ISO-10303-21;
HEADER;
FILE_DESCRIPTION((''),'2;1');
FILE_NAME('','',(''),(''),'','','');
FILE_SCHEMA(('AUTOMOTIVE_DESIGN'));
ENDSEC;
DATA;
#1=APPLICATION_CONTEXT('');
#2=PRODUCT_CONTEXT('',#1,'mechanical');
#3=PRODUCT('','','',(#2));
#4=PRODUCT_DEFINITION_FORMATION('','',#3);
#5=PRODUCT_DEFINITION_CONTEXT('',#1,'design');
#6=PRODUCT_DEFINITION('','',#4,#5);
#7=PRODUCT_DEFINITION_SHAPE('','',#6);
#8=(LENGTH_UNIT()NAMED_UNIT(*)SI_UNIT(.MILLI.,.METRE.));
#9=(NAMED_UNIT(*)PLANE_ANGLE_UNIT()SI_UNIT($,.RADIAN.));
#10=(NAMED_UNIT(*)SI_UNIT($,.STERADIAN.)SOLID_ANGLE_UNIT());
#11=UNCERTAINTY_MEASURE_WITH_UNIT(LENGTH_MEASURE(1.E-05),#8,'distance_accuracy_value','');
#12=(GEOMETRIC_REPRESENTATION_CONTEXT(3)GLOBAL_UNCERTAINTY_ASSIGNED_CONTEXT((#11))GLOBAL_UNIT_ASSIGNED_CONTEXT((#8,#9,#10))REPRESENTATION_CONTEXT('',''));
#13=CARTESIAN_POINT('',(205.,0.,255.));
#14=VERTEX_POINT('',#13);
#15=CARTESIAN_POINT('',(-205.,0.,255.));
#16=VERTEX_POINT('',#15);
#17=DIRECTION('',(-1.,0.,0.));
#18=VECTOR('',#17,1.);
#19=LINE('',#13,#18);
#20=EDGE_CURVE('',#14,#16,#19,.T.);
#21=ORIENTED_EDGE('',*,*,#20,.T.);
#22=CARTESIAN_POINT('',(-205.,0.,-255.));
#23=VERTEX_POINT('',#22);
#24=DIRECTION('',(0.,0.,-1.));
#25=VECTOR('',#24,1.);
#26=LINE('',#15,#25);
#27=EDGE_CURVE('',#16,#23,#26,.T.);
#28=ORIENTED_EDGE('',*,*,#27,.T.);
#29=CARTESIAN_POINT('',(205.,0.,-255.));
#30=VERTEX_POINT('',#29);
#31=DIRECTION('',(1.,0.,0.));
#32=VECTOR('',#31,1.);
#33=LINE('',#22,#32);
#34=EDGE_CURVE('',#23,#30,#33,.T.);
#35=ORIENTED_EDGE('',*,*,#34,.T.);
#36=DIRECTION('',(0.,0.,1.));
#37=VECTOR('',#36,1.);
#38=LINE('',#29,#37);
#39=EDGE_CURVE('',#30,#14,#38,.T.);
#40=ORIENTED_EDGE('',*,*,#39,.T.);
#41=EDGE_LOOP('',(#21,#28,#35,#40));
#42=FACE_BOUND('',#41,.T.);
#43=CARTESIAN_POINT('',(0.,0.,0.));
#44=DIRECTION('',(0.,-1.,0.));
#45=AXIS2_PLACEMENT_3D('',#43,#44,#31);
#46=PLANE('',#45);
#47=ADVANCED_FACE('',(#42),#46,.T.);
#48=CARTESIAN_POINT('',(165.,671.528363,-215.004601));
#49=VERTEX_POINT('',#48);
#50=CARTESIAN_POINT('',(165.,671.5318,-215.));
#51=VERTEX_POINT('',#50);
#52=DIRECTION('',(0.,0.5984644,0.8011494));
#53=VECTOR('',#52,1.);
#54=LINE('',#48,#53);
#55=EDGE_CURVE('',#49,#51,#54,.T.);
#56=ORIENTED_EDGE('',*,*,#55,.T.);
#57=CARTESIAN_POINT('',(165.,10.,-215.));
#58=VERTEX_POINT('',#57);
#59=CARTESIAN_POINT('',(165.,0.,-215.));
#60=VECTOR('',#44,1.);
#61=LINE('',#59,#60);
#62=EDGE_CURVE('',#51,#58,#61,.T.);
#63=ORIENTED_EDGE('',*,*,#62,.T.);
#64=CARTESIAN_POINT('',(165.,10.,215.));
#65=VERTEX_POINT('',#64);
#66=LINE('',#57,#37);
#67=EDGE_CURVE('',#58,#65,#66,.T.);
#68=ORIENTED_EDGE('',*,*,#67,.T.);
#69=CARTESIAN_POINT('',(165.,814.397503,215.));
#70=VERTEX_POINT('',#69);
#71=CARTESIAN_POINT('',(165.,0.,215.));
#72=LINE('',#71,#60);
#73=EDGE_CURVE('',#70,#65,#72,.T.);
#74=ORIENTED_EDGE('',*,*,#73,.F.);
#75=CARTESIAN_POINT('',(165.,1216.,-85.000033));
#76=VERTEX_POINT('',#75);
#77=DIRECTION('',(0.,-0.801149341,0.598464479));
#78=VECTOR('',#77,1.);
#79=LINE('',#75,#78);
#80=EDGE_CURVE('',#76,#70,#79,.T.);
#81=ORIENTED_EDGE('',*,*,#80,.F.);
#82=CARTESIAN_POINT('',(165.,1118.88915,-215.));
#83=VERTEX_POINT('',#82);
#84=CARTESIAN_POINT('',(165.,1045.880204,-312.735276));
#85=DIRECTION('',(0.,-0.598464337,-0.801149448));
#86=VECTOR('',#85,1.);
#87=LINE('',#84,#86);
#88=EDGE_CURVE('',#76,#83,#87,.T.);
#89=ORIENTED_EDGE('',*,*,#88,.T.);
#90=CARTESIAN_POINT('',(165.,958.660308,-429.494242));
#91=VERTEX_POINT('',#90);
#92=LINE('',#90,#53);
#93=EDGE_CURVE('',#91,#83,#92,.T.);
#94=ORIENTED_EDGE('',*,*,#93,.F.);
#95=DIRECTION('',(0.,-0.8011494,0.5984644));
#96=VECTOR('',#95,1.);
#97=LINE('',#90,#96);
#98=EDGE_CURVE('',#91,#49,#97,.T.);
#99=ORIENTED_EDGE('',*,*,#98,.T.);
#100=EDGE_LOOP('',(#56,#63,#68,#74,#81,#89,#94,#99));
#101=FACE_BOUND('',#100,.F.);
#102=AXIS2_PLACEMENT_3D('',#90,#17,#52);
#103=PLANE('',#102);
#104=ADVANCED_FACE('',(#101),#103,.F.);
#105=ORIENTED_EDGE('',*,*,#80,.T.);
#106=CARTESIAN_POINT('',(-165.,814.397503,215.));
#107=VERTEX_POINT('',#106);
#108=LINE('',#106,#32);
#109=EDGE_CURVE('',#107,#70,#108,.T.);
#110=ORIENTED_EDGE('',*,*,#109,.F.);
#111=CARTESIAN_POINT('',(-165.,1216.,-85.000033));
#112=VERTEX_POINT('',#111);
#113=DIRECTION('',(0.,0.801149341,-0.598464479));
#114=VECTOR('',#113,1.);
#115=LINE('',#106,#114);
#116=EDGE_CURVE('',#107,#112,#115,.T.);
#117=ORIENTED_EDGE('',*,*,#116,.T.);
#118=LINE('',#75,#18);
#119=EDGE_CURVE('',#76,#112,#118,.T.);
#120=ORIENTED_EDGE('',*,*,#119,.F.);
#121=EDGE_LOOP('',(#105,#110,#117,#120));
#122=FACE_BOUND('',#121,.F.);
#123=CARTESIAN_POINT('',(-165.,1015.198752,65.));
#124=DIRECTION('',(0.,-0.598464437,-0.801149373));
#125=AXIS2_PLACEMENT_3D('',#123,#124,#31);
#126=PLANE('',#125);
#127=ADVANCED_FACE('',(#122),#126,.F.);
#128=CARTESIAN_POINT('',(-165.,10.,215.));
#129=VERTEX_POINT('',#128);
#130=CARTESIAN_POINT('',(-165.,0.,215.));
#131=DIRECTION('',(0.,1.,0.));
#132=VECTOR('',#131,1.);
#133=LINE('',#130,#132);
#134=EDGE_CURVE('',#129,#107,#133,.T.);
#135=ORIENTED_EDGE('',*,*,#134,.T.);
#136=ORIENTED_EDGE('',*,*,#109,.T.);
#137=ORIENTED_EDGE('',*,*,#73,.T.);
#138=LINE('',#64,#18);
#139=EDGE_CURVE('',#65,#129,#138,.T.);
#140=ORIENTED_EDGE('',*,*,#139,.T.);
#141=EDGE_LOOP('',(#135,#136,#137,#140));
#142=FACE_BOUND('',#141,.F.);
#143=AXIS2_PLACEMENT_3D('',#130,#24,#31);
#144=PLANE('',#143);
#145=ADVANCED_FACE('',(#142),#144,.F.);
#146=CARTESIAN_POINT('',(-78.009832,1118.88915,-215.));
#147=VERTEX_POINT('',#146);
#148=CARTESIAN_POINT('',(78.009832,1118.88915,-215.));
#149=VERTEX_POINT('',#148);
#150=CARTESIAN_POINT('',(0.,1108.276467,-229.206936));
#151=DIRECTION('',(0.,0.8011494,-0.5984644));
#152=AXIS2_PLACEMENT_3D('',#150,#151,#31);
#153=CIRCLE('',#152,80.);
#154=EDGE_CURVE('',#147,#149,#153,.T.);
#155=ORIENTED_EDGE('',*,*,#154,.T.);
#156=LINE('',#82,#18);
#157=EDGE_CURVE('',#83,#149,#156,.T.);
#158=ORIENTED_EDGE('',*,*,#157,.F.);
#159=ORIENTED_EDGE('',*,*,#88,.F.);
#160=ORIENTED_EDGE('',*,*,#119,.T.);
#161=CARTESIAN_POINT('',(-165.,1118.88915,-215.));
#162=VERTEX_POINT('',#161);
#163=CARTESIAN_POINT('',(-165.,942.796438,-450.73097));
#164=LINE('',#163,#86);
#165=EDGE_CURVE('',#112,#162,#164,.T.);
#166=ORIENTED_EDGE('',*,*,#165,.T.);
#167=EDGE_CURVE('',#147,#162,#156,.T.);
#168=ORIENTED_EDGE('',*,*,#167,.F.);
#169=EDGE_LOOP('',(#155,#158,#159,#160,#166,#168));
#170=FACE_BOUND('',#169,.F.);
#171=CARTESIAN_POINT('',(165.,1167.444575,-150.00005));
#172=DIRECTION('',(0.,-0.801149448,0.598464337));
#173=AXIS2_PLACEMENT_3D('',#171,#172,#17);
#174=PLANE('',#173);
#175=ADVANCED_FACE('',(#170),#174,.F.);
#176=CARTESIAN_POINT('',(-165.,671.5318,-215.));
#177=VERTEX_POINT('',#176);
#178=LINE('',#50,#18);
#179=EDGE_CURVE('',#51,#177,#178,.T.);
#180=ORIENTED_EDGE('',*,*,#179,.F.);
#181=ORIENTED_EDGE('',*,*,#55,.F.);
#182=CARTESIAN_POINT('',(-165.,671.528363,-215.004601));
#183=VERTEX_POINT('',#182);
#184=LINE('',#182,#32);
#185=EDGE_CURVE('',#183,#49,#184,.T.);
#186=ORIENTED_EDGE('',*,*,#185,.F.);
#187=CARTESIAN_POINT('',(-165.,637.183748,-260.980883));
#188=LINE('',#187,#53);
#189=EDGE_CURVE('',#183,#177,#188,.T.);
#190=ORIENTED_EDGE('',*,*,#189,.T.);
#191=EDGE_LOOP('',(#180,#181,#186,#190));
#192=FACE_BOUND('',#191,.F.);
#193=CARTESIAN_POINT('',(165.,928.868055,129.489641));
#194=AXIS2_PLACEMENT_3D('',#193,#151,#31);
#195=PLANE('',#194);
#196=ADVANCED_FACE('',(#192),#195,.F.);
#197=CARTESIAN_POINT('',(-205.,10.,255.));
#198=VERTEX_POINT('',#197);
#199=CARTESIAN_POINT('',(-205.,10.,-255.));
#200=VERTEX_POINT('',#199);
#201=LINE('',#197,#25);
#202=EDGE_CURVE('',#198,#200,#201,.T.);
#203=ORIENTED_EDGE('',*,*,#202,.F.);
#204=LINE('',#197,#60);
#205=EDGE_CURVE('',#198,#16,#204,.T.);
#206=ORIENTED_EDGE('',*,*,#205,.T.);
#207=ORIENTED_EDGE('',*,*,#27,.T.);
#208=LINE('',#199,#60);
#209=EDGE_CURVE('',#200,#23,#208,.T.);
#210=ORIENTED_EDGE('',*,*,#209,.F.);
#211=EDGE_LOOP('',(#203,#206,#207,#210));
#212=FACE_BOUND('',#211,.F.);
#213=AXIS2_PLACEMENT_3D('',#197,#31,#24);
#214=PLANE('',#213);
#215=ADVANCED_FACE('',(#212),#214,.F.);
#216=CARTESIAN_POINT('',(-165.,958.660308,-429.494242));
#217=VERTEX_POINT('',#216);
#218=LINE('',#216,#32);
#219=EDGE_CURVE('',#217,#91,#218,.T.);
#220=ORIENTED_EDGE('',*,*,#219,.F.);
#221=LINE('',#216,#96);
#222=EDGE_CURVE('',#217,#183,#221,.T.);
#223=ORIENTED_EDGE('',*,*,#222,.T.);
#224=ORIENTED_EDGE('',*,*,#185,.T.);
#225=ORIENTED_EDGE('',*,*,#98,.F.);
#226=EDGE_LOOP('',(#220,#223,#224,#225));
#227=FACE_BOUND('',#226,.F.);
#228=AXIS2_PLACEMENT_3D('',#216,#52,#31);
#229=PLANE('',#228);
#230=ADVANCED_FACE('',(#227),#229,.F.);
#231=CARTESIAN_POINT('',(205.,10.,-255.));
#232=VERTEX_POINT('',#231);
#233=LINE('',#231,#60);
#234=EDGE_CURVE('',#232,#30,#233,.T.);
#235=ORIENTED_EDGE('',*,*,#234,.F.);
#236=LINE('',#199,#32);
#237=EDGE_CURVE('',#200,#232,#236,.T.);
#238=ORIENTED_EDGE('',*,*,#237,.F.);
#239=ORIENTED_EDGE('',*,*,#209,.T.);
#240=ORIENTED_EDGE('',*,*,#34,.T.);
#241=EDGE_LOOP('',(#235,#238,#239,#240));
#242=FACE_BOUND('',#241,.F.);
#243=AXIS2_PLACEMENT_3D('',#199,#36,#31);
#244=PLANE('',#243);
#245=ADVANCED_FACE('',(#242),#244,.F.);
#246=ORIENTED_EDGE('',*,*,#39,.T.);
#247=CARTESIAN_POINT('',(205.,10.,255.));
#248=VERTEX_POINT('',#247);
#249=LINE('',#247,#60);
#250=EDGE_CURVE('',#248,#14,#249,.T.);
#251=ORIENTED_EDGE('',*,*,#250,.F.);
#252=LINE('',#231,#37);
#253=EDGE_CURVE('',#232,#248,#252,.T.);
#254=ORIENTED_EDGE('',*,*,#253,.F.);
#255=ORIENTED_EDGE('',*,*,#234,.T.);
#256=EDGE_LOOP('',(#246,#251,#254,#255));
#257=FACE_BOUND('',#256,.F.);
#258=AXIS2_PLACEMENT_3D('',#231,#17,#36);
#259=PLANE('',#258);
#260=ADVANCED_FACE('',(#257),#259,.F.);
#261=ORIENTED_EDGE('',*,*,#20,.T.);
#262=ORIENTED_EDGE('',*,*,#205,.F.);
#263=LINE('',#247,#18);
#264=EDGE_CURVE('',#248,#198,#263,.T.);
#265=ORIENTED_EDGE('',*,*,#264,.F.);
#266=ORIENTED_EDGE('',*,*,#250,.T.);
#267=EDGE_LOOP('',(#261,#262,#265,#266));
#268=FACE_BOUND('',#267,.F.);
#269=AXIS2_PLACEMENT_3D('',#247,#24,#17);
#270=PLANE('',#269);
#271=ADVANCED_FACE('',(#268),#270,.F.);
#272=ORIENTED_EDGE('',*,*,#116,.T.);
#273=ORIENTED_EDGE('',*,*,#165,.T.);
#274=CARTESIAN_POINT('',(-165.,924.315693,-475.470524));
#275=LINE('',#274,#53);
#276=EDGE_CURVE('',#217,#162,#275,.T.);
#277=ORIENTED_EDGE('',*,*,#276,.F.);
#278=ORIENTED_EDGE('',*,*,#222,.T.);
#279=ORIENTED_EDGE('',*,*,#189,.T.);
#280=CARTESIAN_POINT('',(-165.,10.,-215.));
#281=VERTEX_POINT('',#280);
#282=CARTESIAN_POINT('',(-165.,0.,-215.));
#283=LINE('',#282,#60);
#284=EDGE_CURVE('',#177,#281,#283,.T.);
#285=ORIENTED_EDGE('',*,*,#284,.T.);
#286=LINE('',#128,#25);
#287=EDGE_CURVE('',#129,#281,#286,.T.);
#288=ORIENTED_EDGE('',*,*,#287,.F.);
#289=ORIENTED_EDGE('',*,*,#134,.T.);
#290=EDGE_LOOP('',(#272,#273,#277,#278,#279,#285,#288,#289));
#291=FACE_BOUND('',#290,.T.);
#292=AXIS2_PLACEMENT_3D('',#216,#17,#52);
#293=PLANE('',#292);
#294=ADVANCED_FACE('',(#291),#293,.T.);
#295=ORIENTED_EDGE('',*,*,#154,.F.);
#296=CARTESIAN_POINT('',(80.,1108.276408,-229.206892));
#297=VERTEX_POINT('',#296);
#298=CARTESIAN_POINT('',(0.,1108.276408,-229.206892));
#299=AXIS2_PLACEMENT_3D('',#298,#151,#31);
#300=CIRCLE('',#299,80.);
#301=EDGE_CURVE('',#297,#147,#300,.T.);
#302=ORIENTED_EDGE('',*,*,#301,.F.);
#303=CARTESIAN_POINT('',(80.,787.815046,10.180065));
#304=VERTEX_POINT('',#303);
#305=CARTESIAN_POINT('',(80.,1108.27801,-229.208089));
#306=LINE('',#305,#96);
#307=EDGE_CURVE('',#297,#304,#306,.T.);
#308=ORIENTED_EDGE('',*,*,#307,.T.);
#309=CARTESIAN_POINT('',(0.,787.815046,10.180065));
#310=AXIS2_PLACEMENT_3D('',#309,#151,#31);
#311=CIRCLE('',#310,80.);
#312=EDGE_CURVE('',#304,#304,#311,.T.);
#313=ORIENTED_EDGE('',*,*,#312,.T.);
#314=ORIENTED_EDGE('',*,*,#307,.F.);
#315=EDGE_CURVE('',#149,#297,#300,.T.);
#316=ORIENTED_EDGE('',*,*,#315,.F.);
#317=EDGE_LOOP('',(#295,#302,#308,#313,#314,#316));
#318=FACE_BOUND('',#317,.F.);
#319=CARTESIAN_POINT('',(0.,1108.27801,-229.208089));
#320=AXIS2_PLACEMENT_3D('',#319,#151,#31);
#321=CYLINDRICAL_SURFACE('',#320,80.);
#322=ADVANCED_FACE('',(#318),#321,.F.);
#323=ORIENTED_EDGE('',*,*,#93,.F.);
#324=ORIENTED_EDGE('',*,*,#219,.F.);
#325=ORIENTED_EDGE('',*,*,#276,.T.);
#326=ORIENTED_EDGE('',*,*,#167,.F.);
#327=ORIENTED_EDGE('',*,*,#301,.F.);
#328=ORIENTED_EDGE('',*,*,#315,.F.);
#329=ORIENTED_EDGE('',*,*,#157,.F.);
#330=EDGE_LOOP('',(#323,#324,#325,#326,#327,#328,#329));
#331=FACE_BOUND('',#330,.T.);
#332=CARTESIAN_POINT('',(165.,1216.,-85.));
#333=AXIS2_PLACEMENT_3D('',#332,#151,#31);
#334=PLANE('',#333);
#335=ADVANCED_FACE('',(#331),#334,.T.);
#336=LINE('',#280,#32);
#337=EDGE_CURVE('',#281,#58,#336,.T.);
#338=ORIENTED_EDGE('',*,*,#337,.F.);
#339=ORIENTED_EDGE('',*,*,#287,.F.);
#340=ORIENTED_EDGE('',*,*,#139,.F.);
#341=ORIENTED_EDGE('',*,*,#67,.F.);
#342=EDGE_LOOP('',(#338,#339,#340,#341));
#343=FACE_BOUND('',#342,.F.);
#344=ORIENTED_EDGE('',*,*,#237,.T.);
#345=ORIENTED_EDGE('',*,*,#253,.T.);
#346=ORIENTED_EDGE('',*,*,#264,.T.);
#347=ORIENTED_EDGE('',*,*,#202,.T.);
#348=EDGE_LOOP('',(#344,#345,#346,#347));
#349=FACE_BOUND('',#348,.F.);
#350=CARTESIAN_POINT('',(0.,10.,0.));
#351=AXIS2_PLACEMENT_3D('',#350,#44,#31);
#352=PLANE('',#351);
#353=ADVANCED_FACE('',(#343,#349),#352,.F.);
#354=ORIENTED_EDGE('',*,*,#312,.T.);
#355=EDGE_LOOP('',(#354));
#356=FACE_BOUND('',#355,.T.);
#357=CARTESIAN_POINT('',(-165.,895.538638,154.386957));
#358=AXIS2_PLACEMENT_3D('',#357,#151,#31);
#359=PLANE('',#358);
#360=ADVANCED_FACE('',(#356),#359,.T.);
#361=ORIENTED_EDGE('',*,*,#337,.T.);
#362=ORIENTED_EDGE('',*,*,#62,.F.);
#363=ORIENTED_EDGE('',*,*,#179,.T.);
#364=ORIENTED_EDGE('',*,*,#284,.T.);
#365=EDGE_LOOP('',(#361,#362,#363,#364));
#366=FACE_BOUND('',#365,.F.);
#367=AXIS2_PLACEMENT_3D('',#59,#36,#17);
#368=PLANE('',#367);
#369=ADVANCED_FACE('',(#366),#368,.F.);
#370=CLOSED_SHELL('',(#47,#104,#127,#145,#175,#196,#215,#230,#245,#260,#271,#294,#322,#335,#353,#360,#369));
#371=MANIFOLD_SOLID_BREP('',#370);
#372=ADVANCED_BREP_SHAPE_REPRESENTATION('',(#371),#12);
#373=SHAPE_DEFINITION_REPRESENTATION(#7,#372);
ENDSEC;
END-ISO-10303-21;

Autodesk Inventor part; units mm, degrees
ref_plane "YZ Plane" through (0, 0, 0) normal (1, 0, 0) x (0, 1, 0)
ref_plane "XZ Plane" through (0, 0, 0) normal (0, 1, 0) x (-1, 0, 0)
sketch "Sketch1" plane through (0, 0, 0) normal (0, 1, 0) x (-1, 0, 0)
  line L0 (165, 215) -> (-165, 215)
  line L1 (-165, 215) -> (-165, -215)
  line L2 (-165, -215) -> (165, -215)
  line L3 (165, -215) -> (165, 215)
  line L4 (165, 215) -> (-165, -215) construction
  line L5 (-165, 215) -> (165, -215) construction
  point P0 (0, 0)
  dimension "d0" = 330
  dimension "d1" = 430
extrude "Extrusion1" add sketch "Sketch1" along normal blind 816
move faces "Move1" translate (0, 400, 0) faces at (55, 816, 71.6667)
chamfer "Chamfer1" distance 300 angle 53.24 1 edges at (0, 1216, 215) measured on face at (55, 1216, 71.6667)
chamfer "Chamfer2" distance 130 angle 36.76 1 edges at (0, 1216, -215) measured on face at (55, 1216, -171.6667)
ref_plane "Work Plane1" through (165, 1216, -85) normal (0, 0.8011494, -0.5984644) x (1, 0, 0)
sketch "Sketch2" plane through (165, 1216, -85) normal (0, 0.8011494, -0.5984644) x (1, 0, 0)
  line L0 (-330, 0) -> (0, 0) projected
  line L1 (-330, 487.3879) -> (-330, 0) projected
  line L2 (0, 0) -> (-330, 0)
  line L3 (-330, 0) -> (-330, 430)
  line L4 (-330, 430) -> (0, 430)
  line L5 (0, 430) -> (0, 0)
  point P0 (-165, 659.6351)
extrude "Extrusion2" add sketch "Sketch2" against normal blind 358.4
sketch "Sketch3" plane through (-165, 1216, -85) normal (0, 0.8011494, -0.5984644) x (1, 0, 0)
  circle A0 centre (165, 180) radius 80
  point P0 (165, 659.6351)
extrude "Extrusion3" cut sketch "Sketch3" against normal blind 400
sketch "Sketch4" plane through (0, 0, 0) normal (0, -1, 0) x (1, 0, 0)
  line L0 (165, 215) -> (-165, 215)
  line L1 (-165, 215) -> (-165, -215)
  line L2 (-165, -215) -> (165, -215)
  line L3 (165, -215) -> (165, 215)
  line L4 (165, 215) -> (-165, -215) construction
  line L5 (-165, 215) -> (165, -215) construction
  point P0 (0, 0)
extrude "Extrusion4" cut sketch "Sketch4" against normal blind 10
sketch "Sketch5" plane through (0, 10, 0) normal (0, -1, 0) x (1, 0, 0)
  line L0 (205, 255) -> (-205, 255)
  line L1 (-205, 255) -> (-205, -255)
  line L2 (-205, -255) -> (205, -255)
  line L3 (205, -255) -> (205, 255)
  line L4 (205, 255) -> (-205, -255) construction
  line L5 (-205, 255) -> (205, -255) construction
  point P0 (0, 0)
extrude "Extrusion5" add sketch "Sketch5" along normal blind 10
properties part number "MountBase"
